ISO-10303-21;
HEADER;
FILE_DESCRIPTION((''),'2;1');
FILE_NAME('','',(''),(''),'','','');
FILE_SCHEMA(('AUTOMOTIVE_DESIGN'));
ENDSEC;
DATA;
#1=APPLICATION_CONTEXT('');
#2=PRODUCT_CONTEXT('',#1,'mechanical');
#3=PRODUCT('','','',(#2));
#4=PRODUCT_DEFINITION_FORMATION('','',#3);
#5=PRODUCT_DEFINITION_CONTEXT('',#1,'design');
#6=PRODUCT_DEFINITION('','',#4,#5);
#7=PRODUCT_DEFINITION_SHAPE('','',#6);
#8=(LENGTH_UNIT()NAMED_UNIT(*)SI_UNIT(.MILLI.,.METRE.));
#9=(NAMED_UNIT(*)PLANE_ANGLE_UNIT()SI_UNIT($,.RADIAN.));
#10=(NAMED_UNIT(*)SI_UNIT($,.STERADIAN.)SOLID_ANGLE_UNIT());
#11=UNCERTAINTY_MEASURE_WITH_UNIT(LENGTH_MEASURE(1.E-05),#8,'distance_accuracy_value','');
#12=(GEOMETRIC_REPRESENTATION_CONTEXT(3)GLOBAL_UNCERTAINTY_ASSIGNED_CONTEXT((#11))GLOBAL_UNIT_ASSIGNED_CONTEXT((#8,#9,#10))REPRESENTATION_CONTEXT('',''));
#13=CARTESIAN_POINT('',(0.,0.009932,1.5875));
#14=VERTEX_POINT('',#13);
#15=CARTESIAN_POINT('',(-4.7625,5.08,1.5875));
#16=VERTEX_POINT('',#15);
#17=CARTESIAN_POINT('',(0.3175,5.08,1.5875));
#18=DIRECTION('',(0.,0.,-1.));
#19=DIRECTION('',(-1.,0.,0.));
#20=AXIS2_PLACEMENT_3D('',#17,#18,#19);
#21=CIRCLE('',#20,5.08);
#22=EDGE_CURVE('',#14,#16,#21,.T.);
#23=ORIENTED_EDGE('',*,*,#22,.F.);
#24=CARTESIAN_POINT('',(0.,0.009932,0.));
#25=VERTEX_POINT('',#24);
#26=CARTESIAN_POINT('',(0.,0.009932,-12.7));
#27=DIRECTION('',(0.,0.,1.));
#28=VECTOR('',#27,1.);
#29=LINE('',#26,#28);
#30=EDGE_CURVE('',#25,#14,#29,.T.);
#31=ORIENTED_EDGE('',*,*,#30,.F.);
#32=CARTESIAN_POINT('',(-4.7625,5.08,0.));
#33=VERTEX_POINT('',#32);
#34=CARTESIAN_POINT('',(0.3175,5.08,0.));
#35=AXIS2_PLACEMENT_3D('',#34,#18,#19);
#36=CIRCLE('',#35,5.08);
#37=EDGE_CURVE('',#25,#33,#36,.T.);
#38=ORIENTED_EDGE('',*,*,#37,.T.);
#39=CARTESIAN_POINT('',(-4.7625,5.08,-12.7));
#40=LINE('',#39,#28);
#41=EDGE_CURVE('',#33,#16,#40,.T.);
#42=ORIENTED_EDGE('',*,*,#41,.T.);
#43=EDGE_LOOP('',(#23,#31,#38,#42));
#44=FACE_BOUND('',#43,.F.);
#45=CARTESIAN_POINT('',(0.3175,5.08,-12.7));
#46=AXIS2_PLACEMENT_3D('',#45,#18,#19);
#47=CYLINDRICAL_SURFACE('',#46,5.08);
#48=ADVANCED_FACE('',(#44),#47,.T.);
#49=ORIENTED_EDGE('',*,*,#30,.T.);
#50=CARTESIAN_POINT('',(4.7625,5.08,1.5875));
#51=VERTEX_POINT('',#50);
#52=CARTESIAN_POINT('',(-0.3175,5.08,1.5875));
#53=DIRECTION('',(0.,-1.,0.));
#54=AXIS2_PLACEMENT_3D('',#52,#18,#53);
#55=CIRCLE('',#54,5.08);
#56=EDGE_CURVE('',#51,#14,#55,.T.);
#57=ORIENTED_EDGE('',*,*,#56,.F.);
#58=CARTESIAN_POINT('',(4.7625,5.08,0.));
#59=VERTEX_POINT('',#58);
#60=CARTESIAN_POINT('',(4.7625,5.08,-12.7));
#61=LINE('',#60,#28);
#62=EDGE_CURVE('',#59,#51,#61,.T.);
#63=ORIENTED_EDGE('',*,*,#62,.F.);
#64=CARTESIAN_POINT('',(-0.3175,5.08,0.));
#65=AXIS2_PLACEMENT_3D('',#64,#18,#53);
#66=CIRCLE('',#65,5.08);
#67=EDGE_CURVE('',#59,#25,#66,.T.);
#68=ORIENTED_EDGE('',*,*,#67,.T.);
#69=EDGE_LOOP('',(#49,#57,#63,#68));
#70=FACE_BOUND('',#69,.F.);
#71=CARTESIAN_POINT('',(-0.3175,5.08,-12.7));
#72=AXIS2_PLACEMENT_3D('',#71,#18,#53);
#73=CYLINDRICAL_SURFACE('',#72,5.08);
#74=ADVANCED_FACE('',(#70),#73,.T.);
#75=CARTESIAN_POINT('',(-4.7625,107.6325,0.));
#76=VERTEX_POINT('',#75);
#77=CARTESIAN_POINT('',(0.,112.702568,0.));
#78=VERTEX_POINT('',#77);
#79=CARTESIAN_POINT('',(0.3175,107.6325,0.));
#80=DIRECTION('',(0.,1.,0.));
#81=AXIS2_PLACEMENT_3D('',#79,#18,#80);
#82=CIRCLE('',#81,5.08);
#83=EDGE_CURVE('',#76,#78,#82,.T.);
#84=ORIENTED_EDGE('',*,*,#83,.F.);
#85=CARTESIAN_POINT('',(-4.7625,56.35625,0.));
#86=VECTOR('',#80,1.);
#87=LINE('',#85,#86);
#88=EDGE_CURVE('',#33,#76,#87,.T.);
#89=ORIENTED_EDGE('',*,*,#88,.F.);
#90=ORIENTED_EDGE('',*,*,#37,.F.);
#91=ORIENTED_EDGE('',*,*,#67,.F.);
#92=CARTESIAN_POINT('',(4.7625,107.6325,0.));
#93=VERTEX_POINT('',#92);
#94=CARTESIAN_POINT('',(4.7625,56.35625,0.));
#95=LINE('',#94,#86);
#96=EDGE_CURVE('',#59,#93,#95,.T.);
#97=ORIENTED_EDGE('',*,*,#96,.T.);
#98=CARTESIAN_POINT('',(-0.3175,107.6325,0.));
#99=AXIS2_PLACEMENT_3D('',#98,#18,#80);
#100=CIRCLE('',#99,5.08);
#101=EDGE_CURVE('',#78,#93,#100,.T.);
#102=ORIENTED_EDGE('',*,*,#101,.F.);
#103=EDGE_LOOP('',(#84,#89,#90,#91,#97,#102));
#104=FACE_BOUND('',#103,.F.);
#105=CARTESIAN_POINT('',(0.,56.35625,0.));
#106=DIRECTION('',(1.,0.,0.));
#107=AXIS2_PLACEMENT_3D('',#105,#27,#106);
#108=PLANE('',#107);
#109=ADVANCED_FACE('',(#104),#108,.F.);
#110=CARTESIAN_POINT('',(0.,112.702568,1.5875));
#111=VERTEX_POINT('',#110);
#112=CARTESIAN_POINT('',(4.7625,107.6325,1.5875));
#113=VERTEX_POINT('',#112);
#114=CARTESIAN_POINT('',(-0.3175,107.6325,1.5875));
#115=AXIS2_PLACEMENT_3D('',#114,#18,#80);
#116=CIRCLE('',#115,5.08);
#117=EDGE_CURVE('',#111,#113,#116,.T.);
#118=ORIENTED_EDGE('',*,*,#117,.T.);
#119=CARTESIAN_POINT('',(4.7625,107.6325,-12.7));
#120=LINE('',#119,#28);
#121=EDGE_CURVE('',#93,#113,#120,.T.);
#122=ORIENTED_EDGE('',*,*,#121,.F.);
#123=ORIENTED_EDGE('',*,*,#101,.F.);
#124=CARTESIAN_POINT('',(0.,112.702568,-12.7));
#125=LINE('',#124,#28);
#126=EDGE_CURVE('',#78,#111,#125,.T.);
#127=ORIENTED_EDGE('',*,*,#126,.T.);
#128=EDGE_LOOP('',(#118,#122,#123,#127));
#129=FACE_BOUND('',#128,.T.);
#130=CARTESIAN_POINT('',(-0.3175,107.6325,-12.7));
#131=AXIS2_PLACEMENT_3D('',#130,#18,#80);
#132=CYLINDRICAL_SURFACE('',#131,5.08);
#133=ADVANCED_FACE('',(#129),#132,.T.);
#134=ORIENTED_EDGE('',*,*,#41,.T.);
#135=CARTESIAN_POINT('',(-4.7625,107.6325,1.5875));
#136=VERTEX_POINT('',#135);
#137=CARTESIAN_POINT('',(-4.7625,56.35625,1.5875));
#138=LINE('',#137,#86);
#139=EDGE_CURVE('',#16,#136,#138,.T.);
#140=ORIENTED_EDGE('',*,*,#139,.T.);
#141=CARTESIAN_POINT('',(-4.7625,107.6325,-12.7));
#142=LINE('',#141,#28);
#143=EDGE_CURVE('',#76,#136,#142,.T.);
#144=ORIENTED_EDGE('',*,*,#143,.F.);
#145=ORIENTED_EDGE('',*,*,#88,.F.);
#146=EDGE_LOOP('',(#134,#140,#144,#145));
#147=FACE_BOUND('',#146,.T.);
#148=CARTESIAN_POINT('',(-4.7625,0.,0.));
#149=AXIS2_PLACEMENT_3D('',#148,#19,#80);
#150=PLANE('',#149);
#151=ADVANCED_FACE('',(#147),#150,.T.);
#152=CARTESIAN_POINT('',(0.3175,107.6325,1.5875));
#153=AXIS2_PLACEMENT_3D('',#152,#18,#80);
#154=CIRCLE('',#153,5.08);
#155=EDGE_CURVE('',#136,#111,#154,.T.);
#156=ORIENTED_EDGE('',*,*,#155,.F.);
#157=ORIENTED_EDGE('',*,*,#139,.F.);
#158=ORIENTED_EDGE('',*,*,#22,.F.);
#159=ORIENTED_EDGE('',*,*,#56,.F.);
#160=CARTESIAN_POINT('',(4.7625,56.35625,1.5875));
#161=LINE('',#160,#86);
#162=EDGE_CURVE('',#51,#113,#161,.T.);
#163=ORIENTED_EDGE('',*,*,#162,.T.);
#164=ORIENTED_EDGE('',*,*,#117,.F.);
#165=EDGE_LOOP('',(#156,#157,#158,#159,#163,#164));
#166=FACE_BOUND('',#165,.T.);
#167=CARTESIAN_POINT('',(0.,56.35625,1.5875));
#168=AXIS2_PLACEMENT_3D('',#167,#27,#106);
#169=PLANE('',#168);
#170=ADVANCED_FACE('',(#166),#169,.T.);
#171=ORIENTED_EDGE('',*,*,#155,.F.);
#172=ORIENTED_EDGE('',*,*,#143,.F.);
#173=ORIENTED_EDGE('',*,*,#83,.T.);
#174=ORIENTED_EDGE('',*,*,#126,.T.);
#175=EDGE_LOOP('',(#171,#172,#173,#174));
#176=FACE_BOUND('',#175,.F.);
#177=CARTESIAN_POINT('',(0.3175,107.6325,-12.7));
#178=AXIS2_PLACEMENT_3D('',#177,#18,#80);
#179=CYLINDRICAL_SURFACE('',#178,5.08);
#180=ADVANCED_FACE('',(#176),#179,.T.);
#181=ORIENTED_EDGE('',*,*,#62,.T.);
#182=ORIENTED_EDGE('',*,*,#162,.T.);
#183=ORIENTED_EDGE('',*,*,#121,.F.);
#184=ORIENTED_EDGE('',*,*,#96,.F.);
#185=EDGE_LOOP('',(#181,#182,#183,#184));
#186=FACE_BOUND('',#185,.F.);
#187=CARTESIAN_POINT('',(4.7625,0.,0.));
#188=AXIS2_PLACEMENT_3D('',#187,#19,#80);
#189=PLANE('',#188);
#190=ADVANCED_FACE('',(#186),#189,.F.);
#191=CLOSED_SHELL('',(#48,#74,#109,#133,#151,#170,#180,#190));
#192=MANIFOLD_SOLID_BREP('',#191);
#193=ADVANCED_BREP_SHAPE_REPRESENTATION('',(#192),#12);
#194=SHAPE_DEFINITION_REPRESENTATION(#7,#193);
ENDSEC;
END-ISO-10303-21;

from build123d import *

# Parameters (mm, degrees)
F0_W        = 9.525
F0_H        = 112.7125
F1_DEPTH    = 1.5875
F2_T1_DEPTH = 26.9875


# Not quite as in the source:
# - a fillet or chamfer that OpenCascade refuses, or shapes differently, is made with other operations: its cross-section is extruded or revolved along the edge and cut away or added


with BuildPart() as f1:
    # F0 (on Top) → F1 (new body)
    with BuildSketch(Plane.XY):
        with Locations((0, 56.35625)):
            Rectangle(F0_W, F0_H)
    extrude(amount=F1_DEPTH)

    # F2: fillet of radius 5.08 on 4 edges, made by hand

    # F2_s2 → F2_t1 (cut)
    with BuildSketch(Plane.XY.offset(-12.7)):
        with BuildLine():
            ThreePointArc((-0.3175, 0), (3.2746024484, 1.4878975516), (4.7625, 5.08))
            Line((4.7625, 5.08), (4.7625, 0))
            Line((4.7625, 0), (-0.3175, 0))
        make_face()
        with BuildLine():
            ThreePointArc((-4.7625, 5.08), (-3.2746024484, 1.4878975516), (0.3175, 0))
            Line((0.3175, 0), (-4.7625, 0))
            Line((-4.7625, 0), (-4.7625, 5.08))
        make_face()
        with BuildLine():
            ThreePointArc((-0.3175, 112.7125), (3.2746024484, 111.2246024484), (4.7625, 107.6325))
            Line((4.7625, 107.6325), (4.7625, 112.7125))
            Line((4.7625, 112.7125), (-0.3175, 112.7125))
        make_face()
        with BuildLine():
            ThreePointArc((0.3175, 112.7125), (-3.2746024484, 111.2246024484), (-4.7625, 107.6325))
            Line((-4.7625, 107.6325), (-4.7625, 112.7125))
            Line((-4.7625, 112.7125), (0.3175, 112.7125))
        make_face()
    extrude(amount=F2_T1_DEPTH, mode=Mode.SUBTRACT)


solid = f1.part
